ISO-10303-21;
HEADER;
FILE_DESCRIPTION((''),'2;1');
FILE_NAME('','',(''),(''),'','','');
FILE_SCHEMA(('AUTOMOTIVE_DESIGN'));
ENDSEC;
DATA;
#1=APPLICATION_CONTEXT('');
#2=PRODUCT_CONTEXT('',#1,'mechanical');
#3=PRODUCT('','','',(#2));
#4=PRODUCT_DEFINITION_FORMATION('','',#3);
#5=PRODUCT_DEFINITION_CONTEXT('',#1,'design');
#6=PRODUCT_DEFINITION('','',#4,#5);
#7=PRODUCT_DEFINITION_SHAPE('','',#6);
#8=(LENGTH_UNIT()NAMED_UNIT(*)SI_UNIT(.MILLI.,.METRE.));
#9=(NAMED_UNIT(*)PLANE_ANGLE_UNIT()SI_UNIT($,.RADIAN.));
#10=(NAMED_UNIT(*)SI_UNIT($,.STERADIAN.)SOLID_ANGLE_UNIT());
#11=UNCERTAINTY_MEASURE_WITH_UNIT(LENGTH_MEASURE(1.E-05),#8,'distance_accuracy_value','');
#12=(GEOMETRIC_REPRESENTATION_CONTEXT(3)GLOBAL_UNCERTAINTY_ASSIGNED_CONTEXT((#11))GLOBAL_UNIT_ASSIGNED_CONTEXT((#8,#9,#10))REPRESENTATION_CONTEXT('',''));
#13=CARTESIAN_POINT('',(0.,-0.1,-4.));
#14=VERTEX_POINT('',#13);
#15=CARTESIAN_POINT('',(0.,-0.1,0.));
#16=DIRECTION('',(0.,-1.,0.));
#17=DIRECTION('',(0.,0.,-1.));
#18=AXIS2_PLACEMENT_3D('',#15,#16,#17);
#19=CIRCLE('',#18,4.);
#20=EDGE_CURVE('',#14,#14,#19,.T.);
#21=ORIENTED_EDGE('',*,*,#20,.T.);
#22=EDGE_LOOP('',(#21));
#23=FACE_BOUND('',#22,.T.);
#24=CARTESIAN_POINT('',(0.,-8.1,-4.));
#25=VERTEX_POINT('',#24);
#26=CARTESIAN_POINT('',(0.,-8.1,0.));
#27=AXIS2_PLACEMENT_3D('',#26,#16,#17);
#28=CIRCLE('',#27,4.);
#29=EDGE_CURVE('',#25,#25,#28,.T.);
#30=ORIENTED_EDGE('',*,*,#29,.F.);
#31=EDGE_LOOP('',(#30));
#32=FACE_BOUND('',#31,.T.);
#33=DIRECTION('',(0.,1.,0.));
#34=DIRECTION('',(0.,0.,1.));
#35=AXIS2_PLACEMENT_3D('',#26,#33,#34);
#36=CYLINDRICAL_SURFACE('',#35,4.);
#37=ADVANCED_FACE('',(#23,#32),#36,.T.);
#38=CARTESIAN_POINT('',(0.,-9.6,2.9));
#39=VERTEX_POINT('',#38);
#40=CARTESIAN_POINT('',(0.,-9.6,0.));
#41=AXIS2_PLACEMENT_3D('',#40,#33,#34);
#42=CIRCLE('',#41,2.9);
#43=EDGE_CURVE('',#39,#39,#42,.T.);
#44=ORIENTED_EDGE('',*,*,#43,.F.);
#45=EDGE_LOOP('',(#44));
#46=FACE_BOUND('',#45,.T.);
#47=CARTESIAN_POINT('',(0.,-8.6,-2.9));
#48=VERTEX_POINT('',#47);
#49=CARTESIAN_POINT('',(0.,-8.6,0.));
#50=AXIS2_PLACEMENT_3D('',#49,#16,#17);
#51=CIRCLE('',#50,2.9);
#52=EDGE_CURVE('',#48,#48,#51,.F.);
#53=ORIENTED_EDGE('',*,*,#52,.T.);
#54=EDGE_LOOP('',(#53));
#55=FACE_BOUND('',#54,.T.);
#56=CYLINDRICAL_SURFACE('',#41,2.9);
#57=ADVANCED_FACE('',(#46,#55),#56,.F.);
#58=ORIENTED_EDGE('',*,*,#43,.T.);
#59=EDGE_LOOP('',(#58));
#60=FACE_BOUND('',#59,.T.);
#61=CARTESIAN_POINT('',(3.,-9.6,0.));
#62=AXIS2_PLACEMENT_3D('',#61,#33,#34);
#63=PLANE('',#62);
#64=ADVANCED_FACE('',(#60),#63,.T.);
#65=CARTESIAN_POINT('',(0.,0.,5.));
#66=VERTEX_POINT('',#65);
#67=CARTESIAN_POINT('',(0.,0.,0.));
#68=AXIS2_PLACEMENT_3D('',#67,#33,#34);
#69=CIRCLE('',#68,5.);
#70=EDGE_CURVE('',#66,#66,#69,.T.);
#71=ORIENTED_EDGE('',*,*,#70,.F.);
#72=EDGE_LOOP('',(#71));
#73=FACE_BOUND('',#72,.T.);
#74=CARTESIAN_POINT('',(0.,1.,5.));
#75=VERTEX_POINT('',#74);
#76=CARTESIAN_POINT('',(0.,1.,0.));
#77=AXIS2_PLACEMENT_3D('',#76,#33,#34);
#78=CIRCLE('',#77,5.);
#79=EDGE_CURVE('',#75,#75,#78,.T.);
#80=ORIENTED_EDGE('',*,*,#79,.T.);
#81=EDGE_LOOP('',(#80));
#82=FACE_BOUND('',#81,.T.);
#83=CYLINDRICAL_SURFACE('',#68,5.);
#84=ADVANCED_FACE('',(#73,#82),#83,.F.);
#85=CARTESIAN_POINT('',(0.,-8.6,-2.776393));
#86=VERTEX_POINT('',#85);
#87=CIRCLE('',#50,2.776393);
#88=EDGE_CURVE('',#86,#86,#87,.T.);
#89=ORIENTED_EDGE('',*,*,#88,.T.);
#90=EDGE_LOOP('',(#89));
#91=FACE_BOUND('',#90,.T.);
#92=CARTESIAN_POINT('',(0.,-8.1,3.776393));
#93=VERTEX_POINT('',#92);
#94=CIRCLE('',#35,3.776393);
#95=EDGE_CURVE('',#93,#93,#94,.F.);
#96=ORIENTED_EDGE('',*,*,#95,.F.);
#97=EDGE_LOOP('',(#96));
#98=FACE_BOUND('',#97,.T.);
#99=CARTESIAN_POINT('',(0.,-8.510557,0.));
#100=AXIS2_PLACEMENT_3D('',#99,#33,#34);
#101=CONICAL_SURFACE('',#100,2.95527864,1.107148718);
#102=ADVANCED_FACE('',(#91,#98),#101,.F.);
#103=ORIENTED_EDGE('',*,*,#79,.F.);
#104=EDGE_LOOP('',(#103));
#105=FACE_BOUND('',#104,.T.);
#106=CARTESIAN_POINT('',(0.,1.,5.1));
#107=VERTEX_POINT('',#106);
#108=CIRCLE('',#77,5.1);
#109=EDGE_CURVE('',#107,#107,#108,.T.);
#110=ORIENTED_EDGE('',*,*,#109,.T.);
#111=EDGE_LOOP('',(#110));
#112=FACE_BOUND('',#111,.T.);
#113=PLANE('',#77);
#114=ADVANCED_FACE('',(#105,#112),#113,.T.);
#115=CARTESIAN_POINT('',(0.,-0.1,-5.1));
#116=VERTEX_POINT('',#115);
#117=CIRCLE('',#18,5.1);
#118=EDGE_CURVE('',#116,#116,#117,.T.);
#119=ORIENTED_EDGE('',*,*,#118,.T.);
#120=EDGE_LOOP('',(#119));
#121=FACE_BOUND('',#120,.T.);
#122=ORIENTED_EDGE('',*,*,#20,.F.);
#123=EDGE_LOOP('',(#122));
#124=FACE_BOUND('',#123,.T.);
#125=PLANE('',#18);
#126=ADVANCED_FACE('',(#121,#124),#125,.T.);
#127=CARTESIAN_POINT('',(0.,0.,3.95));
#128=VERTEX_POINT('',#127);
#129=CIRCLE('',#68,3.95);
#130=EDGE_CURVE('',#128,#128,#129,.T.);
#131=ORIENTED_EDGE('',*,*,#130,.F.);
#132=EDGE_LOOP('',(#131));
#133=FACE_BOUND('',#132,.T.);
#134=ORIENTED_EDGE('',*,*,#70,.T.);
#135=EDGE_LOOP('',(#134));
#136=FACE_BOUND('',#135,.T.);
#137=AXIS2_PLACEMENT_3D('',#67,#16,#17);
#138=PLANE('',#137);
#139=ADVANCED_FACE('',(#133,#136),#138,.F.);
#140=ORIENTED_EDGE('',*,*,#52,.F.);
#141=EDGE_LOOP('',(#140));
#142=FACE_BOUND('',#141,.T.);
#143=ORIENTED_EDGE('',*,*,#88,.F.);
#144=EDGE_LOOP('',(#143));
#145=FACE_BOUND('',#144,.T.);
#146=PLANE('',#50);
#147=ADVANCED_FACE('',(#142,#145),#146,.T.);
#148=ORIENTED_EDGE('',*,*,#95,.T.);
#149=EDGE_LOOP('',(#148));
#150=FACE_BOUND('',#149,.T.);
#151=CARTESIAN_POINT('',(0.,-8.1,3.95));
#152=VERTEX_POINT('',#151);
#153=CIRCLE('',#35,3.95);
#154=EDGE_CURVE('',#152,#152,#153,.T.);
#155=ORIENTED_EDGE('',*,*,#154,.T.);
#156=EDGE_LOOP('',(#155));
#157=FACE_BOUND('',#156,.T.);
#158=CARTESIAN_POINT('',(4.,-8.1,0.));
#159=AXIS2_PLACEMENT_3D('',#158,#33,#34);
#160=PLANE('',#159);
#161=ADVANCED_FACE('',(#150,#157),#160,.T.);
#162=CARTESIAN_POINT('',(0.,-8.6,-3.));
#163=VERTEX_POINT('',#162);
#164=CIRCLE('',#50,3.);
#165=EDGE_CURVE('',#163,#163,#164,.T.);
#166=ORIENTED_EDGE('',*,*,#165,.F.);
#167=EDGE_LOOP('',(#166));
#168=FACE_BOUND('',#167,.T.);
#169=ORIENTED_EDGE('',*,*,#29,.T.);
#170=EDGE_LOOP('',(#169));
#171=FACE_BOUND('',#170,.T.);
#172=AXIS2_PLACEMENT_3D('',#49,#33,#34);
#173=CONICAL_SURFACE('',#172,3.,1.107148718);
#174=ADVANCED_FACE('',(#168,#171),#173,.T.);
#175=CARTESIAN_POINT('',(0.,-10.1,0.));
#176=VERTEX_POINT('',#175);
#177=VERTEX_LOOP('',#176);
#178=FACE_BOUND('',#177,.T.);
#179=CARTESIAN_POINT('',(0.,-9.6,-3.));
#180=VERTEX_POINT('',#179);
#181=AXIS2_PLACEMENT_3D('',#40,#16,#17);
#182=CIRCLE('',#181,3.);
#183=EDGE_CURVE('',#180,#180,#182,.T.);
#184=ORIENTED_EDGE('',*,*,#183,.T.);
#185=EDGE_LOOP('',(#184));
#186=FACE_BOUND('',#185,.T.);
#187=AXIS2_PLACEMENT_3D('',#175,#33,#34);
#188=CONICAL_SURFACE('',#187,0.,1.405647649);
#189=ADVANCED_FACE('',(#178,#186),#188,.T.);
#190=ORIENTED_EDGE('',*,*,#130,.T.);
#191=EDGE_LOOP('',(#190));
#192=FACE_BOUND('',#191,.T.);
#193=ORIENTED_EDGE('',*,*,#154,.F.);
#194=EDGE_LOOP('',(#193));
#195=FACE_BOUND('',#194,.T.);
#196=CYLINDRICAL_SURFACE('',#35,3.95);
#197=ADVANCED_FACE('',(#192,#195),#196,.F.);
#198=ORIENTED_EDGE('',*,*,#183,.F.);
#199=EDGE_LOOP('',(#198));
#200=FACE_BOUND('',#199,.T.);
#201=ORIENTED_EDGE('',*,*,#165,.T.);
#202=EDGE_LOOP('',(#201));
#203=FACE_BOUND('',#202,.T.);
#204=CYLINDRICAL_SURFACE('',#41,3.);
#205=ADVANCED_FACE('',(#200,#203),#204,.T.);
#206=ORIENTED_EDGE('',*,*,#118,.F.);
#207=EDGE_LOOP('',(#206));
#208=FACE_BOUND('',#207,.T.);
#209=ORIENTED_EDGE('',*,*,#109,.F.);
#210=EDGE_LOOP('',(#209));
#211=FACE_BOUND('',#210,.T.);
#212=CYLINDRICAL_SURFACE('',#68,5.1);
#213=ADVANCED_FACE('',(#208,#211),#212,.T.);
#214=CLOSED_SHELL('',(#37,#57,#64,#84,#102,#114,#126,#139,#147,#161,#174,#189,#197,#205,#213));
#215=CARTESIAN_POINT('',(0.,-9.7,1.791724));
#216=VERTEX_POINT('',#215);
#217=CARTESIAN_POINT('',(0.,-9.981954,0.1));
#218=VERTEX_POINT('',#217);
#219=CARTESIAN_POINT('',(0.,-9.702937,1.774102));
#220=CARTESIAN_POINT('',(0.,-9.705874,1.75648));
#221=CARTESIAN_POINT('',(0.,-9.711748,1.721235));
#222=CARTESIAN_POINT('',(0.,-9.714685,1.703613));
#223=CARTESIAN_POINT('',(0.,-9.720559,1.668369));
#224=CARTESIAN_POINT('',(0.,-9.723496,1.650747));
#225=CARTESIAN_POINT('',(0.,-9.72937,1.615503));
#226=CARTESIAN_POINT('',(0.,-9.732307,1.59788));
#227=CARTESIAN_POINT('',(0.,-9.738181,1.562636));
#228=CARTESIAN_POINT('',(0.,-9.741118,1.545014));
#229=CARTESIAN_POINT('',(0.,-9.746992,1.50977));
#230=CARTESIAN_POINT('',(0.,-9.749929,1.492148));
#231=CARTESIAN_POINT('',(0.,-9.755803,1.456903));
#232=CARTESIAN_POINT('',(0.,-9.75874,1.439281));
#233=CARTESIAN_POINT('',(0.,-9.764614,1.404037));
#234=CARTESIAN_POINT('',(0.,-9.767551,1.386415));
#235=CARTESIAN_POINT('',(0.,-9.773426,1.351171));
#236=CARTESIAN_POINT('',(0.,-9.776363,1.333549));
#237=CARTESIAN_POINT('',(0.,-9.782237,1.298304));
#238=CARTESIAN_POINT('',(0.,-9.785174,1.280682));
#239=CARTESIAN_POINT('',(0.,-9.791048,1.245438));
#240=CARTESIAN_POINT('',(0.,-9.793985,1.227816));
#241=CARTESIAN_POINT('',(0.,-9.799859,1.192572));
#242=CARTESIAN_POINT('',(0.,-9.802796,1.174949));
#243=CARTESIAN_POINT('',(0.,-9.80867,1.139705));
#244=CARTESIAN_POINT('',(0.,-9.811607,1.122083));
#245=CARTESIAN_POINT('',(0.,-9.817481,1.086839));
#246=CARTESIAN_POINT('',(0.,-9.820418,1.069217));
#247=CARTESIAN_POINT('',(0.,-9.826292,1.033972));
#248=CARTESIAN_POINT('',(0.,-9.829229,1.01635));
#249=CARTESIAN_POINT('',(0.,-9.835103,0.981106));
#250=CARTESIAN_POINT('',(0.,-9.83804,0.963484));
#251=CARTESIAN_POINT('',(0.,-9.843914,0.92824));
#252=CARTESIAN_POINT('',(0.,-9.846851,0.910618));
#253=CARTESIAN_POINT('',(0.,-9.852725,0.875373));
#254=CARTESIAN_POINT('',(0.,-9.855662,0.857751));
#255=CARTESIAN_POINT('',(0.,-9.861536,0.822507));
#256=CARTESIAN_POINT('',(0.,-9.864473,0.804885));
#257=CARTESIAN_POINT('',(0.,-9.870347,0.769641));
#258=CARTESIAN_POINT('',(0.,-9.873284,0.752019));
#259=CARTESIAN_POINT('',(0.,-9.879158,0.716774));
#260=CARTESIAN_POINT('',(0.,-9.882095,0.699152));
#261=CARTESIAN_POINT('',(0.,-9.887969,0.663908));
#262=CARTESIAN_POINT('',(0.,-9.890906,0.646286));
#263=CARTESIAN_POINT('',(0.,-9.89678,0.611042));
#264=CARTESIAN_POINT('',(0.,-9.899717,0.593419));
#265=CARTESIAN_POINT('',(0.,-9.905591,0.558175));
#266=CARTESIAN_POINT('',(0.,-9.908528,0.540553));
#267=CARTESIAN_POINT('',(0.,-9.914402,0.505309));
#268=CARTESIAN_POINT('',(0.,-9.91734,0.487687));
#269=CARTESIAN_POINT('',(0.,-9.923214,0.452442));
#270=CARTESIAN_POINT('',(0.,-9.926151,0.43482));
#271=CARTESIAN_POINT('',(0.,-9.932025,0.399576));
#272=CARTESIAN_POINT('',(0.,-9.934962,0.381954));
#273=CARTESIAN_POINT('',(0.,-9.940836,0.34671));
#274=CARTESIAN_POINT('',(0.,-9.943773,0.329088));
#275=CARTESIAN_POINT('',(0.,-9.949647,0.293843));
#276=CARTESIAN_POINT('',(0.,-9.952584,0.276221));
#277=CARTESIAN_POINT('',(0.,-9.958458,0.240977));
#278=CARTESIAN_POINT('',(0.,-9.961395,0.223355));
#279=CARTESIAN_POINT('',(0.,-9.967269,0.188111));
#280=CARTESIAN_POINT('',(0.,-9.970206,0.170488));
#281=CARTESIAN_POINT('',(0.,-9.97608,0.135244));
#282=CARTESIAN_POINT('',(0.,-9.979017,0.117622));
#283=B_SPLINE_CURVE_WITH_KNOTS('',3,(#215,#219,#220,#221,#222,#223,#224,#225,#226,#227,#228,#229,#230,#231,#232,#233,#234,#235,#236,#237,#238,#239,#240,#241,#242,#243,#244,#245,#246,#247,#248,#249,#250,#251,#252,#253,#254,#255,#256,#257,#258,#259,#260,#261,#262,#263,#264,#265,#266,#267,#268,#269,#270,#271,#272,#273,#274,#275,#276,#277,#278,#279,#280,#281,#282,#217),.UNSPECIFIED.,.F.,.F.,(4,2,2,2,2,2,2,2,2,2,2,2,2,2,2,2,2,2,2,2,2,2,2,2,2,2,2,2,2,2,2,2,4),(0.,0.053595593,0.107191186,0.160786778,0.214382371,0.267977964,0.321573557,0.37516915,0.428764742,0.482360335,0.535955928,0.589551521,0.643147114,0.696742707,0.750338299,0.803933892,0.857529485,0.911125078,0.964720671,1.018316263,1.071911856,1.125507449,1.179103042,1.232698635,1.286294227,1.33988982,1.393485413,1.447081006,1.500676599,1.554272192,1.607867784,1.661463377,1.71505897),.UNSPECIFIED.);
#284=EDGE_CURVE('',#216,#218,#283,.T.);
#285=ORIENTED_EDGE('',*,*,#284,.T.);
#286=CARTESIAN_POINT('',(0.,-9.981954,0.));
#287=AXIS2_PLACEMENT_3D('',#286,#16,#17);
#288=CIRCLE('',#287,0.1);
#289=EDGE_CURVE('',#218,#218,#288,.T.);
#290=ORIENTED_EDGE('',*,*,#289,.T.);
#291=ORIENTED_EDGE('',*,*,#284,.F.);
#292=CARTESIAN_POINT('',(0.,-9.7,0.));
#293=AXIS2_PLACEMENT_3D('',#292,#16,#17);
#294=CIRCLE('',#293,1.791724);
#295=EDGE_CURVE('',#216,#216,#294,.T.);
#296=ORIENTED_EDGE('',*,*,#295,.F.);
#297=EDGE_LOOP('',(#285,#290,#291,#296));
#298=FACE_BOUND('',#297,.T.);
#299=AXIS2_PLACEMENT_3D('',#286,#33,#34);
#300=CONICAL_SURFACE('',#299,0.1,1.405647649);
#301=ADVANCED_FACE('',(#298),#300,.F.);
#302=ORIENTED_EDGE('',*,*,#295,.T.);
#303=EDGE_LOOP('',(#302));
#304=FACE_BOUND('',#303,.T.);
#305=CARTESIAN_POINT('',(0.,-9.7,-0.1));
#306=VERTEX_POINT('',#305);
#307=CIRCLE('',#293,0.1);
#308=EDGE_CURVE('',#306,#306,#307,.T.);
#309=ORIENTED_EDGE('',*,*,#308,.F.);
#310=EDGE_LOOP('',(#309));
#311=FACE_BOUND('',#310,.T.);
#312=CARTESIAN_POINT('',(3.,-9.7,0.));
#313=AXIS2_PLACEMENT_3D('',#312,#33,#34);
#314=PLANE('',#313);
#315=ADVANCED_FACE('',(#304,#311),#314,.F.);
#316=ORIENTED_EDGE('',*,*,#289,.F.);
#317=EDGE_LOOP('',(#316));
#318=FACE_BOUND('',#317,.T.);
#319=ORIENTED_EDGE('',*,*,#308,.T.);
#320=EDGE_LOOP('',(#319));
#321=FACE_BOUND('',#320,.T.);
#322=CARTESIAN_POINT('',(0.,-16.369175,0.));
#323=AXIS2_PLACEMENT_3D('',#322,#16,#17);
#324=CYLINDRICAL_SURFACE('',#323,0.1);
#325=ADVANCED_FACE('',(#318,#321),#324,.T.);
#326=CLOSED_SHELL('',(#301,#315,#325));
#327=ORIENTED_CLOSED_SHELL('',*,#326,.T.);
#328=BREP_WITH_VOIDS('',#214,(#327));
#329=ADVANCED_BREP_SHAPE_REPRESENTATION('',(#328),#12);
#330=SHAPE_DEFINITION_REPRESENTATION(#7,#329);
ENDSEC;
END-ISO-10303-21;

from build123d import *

# Parameters (mm, degrees)
SKETCH1_R           = 5.1
SKETCH1_R_2         = 5
SKETCH8_R           = 5.1
BOSS_EXTRUDE2_DEPTH = 0.1
SKETCH9_R           = 4
BOSS_EXTRUDE3_DEPTH = 8
SKETCH10_R          = 3.95
CUT_EXTRUDE1_DEPTH  = 11.84573649
SKETCH12_4_R        = 3
SKETCH12_4_R_2      = 2.9
EXTRUDE_THIN2_DEPTH = 1


# Read off the part's stored shape, not the designer's step: Loft-Thin7
with BuildPart() as part:
    # Sweep-Thin1: sweep along a path in Sketch3
    with BuildLine(Plane(origin=(0, 0, 0), x_dir=(0, 0, -1), z_dir=(1, 0, 0))) as sweep_thin1_path:
        Line((0, 0), (0, 1))
    # Sketch1 → Sweep-Thin1 (sweep)
    with BuildSketch(Plane(origin=(0, 0, 0), x_dir=(1, 0, 0), z_dir=(0, 1, 0))):
        Circle(SKETCH1_R)
        Circle(SKETCH1_R_2, mode=Mode.SUBTRACT)
    sweep(path=sweep_thin1_path.line)

    # Sketch8 → Boss-Extrude2 (add)
    with BuildSketch(Plane(origin=(0, 0, 0), x_dir=(-1, 0, 0), z_dir=(0, -1, 0))):
        with Locations(Location((0, 0, 0), (0, 0, 270))):
            Circle(SKETCH8_R)
    extrude(amount=BOSS_EXTRUDE2_DEPTH)

    # Sketch9 → Boss-Extrude3 (add)
    with BuildSketch(Plane(origin=(0, -0.1, 0), x_dir=(-1, 0, 0), z_dir=(0, -1, 0))):
        with Locations(Location((0, 0, 0), (0, 0, 90))):
            Circle(SKETCH9_R)
    extrude(amount=BOSS_EXTRUDE3_DEPTH)

    # Sketch10 → Cut-Extrude1 (cut, through all)
    with BuildSketch(Plane(origin=(0, 0, 0), x_dir=(1, 0, 0), z_dir=(0, 1, 0))):
        with Locations(Location((0, 0, 0), (0, 0, 270))):
            Circle(SKETCH10_R)
    extrude(amount=-CUT_EXTRUDE1_DEPTH, mode=Mode.SUBTRACT)

    # Loft-Thin7 outline → Loft-Thin7 (revolve)
    with BuildSketch(Plane.XY):
        Polygon((4, -8.1), (3.776393202, -8.1), (2.776393202, -8.6), (3, -8.6), align=None)
    revolve(axis=Axis((0, 0, 0), (0, 1, 0)))

    # Sketch12<4> → Extrude-Thin2 (add)
    with BuildSketch(Plane(origin=(0, -8.6, 0), x_dir=(-1, 0, 0), z_dir=(0, -1, 0))):
        Circle(SKETCH12_4_R)
        Circle(SKETCH12_4_R_2, mode=Mode.SUBTRACT)
    extrude(amount=EXTRUDE_THIN2_DEPTH)

    # Sketch16 → Revolve-Thin2 (revolve)
    with BuildSketch(Plane.XY, mode=Mode.PRIVATE) as revolve_thin2_sk:
        Polygon((0, -9.6), (0, -10.1), (3, -9.6), align=None)
        Polygon((0.1, -9.7), (0.1, -9.981953958), (1.791723747, -9.7), align=None, mode=Mode.SUBTRACT)
    revolve(revolve_thin2_sk.sketch.rotate(Axis((0, -16.369174854, 0), (0, 1, 0)), 270), axis=Axis((0, -16.369174854, 0), (0, 1, 0)))


solid = part.part
